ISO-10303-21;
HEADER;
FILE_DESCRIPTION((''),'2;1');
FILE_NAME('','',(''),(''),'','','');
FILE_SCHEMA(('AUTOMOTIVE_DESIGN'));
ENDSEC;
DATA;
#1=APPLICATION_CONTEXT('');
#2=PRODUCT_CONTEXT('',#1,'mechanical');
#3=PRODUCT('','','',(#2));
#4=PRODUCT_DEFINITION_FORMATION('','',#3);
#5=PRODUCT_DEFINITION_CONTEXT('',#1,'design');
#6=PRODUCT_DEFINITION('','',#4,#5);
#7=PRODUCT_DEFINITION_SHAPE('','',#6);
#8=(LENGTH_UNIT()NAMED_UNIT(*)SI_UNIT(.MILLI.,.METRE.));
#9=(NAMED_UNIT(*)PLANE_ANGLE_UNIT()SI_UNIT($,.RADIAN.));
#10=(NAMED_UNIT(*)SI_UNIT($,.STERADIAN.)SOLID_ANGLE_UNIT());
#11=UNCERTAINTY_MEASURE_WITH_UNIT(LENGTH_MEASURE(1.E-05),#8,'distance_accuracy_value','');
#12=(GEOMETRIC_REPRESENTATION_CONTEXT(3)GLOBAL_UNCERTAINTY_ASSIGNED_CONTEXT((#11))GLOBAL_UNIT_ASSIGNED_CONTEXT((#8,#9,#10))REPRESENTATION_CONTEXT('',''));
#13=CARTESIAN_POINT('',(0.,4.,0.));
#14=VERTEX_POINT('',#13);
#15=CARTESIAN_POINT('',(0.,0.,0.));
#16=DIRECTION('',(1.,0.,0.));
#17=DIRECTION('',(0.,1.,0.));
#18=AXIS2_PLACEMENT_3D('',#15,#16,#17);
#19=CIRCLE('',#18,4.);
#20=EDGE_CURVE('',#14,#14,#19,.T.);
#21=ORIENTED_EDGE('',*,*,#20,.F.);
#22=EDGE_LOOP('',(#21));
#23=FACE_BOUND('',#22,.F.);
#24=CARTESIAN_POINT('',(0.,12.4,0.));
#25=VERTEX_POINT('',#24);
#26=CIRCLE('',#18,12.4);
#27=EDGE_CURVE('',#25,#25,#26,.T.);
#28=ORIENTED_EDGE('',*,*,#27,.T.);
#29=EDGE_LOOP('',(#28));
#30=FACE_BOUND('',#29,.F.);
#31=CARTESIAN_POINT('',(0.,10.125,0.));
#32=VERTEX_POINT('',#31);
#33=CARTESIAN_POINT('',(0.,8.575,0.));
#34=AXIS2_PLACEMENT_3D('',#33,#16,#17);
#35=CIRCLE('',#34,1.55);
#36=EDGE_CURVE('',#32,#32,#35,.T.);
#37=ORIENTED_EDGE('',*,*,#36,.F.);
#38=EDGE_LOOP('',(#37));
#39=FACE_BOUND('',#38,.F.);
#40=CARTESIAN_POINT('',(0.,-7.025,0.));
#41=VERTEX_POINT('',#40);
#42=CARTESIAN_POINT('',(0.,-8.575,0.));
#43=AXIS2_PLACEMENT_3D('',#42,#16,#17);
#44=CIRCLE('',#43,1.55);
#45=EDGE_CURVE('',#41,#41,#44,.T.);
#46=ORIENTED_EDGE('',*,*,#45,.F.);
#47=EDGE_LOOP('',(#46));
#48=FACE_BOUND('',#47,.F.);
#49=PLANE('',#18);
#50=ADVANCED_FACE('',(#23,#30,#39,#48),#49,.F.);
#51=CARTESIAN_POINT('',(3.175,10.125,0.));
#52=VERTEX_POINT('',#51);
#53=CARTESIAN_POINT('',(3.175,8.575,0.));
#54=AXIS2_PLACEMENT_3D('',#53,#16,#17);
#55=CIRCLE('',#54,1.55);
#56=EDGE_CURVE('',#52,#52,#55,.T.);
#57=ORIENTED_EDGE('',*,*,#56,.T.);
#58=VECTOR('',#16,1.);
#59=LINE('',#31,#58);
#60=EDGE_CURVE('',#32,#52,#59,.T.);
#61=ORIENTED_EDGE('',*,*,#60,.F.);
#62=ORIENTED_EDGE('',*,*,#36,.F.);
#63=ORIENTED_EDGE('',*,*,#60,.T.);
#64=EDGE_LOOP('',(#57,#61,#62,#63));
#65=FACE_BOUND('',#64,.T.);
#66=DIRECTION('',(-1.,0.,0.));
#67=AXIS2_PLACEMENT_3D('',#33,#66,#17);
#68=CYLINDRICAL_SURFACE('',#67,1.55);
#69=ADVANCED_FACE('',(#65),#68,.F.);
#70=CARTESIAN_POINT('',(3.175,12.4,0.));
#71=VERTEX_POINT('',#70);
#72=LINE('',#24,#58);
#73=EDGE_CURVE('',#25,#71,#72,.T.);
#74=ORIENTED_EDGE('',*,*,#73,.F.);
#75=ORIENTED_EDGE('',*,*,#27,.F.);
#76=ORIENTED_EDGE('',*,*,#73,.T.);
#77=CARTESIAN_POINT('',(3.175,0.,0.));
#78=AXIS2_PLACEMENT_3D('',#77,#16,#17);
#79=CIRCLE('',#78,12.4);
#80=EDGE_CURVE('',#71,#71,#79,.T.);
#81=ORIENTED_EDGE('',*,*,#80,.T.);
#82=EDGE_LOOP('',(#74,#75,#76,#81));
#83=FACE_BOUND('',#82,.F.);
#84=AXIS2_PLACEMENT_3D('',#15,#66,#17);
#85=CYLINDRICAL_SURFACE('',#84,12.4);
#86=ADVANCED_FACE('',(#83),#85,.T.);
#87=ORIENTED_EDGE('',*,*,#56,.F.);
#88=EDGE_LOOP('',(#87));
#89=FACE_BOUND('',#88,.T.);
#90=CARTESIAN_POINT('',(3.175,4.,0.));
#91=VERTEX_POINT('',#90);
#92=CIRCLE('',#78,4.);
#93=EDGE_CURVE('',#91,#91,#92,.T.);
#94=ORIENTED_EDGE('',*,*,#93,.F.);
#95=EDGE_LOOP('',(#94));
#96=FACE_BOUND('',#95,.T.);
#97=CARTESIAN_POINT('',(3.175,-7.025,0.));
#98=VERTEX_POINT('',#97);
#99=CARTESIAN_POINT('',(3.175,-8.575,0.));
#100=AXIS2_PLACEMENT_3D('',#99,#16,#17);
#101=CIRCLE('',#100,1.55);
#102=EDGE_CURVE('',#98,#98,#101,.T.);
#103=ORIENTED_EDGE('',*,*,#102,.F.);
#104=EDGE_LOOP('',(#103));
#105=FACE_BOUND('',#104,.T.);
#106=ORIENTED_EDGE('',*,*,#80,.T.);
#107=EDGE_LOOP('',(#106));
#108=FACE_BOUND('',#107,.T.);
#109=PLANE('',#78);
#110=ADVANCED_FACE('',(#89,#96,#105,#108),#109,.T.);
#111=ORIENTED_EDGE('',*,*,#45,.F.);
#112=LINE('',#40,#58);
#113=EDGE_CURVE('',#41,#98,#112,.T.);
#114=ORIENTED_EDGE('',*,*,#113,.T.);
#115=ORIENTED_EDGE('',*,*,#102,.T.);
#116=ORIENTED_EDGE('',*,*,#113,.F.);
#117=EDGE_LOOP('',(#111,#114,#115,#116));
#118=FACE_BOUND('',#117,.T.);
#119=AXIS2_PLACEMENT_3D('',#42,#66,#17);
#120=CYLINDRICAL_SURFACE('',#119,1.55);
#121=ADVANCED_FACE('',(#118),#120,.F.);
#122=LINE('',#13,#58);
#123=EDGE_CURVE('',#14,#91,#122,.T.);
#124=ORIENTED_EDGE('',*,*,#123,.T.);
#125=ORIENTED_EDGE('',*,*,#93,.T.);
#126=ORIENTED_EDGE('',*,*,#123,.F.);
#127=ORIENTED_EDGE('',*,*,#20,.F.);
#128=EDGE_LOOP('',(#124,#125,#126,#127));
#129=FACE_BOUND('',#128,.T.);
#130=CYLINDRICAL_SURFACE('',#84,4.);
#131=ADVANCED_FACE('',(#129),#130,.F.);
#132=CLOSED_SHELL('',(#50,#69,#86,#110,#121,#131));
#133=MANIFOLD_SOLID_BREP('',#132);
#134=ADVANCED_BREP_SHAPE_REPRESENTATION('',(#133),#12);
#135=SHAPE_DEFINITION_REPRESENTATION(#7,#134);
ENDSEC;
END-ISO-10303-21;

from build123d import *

# Parameters (mm, degrees)
F0_R     = 12.4
F0_R_2   = 1.55
F0_R_3   = 4
F1_DEPTH = 3.175


# Not quite as in the source:
# - a length typed as a fraction of an inch, garbled in the dataset ("3 / 203.2 mm" for 3/8 in), is restored


with BuildPart() as f1:
    # F0 (on Right) → F1 (new body)
    with BuildSketch(Plane.YZ):
        Circle(F0_R)
        with Locations((-8.575, 0)):
            Circle(F0_R_2, mode=Mode.SUBTRACT)
        Circle(F0_R_3, mode=Mode.SUBTRACT)
        with Locations((8.575, 0)):
            Circle(F0_R_2, mode=Mode.SUBTRACT)
    extrude(amount=F1_DEPTH)


solid = f1.part
